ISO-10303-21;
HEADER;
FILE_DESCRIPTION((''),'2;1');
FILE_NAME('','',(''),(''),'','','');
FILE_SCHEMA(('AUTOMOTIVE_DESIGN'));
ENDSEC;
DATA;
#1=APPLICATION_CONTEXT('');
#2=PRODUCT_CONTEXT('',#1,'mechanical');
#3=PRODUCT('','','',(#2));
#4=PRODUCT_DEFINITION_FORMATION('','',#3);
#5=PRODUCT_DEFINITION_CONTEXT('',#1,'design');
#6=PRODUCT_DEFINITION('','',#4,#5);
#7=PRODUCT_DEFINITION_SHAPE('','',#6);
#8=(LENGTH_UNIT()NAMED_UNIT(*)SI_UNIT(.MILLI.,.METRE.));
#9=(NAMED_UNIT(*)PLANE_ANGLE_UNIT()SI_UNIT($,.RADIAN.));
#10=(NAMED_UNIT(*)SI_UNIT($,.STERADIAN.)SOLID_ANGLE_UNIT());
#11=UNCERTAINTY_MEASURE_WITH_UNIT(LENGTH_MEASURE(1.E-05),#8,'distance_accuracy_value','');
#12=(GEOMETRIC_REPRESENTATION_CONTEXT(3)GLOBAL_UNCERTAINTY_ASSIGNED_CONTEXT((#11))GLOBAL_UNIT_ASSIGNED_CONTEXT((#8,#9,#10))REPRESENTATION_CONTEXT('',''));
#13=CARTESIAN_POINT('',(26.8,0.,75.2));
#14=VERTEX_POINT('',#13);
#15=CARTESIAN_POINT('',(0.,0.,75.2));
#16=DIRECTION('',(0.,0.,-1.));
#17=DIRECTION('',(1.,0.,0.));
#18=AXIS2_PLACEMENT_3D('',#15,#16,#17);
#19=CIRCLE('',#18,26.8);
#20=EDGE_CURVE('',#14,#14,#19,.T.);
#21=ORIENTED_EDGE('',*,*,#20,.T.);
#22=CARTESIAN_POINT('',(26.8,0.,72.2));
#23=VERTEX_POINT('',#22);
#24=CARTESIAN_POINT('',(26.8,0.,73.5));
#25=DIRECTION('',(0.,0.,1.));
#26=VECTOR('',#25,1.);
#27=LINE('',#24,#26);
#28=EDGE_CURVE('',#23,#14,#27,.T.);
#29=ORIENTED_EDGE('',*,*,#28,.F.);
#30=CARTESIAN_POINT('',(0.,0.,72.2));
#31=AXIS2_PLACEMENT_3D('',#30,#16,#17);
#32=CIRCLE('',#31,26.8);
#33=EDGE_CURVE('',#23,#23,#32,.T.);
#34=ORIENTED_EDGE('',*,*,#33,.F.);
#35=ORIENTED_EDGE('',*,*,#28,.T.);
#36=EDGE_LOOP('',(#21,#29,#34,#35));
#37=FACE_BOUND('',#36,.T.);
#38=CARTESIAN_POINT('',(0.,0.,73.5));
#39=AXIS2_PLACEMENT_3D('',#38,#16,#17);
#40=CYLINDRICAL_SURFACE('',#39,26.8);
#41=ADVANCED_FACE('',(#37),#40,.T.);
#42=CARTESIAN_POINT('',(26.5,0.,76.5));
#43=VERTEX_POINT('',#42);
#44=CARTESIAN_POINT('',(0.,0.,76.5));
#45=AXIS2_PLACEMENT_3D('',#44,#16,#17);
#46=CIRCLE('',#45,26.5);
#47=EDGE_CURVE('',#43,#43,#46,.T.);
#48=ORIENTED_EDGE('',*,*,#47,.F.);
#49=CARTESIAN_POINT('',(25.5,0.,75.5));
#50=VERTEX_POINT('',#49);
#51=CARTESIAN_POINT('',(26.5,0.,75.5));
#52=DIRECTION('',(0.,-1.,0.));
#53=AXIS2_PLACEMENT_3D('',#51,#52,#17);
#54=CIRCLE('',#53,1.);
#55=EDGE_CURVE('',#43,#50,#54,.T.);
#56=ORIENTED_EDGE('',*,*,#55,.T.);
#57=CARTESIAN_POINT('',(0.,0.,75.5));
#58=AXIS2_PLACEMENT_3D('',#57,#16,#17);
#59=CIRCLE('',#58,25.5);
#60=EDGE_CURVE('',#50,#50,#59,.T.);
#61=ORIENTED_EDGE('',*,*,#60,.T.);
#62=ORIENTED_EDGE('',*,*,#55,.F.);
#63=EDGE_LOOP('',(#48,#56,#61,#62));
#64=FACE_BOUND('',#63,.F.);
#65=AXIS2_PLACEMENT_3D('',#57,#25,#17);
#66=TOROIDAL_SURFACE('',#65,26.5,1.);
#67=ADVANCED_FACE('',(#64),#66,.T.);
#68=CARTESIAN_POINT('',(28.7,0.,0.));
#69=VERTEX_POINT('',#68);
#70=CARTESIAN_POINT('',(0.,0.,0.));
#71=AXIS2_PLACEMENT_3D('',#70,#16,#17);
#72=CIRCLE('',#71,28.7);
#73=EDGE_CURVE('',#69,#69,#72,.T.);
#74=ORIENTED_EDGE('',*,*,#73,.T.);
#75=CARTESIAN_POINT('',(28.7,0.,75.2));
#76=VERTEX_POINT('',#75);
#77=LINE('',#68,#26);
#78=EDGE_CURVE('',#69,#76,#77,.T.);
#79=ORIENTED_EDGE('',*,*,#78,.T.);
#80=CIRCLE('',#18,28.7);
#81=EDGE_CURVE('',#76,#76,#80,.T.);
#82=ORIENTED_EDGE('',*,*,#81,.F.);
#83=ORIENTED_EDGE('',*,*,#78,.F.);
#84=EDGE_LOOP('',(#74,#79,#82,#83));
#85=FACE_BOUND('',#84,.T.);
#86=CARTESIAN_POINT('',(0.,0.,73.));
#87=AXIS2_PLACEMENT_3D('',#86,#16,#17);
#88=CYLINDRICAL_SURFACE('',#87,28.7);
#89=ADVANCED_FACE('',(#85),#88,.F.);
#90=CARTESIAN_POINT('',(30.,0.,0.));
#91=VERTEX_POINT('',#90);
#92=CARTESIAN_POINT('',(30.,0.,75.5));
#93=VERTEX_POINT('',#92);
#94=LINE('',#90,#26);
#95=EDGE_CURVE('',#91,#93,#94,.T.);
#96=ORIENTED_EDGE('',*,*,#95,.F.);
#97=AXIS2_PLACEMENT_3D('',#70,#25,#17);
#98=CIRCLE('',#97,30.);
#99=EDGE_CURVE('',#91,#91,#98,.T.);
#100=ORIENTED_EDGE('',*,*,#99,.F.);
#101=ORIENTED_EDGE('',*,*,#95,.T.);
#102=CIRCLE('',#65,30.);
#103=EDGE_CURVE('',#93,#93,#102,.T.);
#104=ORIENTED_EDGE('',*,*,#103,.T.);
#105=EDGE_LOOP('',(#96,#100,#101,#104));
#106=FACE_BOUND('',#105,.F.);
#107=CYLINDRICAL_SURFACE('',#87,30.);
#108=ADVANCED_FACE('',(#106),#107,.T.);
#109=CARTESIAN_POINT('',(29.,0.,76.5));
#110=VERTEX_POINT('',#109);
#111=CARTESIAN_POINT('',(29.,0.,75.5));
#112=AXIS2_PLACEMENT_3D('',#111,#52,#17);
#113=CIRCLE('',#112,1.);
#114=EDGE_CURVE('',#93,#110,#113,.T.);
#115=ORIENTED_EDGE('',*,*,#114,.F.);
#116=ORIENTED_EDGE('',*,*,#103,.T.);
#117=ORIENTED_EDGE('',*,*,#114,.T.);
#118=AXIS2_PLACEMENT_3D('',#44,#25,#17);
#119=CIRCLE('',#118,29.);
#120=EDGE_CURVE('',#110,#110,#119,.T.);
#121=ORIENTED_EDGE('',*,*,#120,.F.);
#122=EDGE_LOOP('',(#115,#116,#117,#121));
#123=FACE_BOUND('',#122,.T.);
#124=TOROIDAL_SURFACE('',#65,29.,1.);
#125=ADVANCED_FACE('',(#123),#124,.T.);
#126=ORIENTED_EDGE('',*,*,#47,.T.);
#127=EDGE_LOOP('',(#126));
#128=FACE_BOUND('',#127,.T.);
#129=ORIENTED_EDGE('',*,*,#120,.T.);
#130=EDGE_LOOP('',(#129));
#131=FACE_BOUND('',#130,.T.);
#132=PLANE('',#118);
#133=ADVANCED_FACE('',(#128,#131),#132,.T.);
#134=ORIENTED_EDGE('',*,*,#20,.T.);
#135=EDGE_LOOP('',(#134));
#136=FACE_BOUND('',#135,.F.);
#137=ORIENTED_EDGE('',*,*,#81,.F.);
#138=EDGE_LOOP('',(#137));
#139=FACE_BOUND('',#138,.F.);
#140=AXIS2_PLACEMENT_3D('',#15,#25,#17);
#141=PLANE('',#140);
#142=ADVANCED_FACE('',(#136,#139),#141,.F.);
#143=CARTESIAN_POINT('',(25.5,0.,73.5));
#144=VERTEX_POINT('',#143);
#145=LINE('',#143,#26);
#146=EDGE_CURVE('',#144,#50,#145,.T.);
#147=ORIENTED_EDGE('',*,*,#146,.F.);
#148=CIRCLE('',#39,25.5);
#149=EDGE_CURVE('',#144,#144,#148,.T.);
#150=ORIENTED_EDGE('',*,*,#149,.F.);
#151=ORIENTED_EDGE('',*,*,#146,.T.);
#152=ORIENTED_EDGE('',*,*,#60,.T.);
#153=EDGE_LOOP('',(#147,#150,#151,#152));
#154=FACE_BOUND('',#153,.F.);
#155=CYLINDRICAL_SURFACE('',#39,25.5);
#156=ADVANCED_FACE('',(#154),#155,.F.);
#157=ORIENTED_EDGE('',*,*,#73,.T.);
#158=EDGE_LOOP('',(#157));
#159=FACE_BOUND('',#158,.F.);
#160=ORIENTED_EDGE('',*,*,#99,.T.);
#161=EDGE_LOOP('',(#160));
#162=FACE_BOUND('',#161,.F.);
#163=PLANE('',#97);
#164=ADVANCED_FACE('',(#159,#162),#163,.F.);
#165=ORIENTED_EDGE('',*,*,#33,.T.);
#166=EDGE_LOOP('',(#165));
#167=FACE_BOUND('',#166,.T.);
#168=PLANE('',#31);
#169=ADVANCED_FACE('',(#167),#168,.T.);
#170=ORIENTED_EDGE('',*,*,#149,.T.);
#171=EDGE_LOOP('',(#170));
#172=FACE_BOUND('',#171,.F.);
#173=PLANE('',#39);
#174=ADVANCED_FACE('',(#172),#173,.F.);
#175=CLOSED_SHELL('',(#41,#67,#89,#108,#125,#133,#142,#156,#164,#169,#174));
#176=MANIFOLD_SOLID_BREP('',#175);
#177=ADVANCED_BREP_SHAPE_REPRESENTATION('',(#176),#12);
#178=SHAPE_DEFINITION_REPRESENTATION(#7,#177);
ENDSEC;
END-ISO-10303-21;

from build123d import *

# Parameters (mm, degrees)
F0_R     = 30
F1_DEPTH = 73
F2_DEPTH = 3.5
F5_D     = 51
F5_DEPTH = 3.5
F5_TIP   = 15.3219457852
F6_R     = 1
F7_T     = -1.3


with BuildPart() as f1:
    # F0 (on Top) → F1 (new body)
    with BuildSketch(Plane.XY):
        Circle(F0_R)
    extrude(amount=F1_DEPTH)

    # F2 (add): a face of the model
    f2_faces = [f1.faces().sort_by_distance(p)[0] for p in [
        (0, 0, 73),
    ]]
    extrude(f2_faces, amount=F2_DEPTH)

    # F5 (one way)
    with BuildSketch(Plane(origin=(0, 0, 73.5), x_dir=(1, 0, 0), z_dir=(0, 0, -1))):
        with Locations((0, 0)):
            Circle(F5_D / 2)
    extrude(amount=-F5_DEPTH, mode=Mode.SUBTRACT)
    with Locations(Plane(origin=(0, 0, 73.5), x_dir=(1, 0, 0), z_dir=(0, 0, -1))):
        with Locations((0, 0)):
            with Locations((0, 0, -(F5_DEPTH + F5_TIP / 2))):  # 118° drill point
                Cone(0, F5_D / 2, F5_TIP, mode=Mode.SUBTRACT)

    # F6
    f6_edges = [f1.edges().sort_by_distance(p)[0] for p in [
        (-30, 0, 76.5),
        (-25.5, 0, 76.5),
    ]]
    fillet(f6_edges, radius=F6_R)

    # F7
    f7_openings = [f1.faces().sort_by_distance(p)[0] for p in [
        (0, 0, 0),
    ]]
    offset(amount=F7_T, openings=f7_openings, kind=Kind.INTERSECTION)


solid = f1.part
